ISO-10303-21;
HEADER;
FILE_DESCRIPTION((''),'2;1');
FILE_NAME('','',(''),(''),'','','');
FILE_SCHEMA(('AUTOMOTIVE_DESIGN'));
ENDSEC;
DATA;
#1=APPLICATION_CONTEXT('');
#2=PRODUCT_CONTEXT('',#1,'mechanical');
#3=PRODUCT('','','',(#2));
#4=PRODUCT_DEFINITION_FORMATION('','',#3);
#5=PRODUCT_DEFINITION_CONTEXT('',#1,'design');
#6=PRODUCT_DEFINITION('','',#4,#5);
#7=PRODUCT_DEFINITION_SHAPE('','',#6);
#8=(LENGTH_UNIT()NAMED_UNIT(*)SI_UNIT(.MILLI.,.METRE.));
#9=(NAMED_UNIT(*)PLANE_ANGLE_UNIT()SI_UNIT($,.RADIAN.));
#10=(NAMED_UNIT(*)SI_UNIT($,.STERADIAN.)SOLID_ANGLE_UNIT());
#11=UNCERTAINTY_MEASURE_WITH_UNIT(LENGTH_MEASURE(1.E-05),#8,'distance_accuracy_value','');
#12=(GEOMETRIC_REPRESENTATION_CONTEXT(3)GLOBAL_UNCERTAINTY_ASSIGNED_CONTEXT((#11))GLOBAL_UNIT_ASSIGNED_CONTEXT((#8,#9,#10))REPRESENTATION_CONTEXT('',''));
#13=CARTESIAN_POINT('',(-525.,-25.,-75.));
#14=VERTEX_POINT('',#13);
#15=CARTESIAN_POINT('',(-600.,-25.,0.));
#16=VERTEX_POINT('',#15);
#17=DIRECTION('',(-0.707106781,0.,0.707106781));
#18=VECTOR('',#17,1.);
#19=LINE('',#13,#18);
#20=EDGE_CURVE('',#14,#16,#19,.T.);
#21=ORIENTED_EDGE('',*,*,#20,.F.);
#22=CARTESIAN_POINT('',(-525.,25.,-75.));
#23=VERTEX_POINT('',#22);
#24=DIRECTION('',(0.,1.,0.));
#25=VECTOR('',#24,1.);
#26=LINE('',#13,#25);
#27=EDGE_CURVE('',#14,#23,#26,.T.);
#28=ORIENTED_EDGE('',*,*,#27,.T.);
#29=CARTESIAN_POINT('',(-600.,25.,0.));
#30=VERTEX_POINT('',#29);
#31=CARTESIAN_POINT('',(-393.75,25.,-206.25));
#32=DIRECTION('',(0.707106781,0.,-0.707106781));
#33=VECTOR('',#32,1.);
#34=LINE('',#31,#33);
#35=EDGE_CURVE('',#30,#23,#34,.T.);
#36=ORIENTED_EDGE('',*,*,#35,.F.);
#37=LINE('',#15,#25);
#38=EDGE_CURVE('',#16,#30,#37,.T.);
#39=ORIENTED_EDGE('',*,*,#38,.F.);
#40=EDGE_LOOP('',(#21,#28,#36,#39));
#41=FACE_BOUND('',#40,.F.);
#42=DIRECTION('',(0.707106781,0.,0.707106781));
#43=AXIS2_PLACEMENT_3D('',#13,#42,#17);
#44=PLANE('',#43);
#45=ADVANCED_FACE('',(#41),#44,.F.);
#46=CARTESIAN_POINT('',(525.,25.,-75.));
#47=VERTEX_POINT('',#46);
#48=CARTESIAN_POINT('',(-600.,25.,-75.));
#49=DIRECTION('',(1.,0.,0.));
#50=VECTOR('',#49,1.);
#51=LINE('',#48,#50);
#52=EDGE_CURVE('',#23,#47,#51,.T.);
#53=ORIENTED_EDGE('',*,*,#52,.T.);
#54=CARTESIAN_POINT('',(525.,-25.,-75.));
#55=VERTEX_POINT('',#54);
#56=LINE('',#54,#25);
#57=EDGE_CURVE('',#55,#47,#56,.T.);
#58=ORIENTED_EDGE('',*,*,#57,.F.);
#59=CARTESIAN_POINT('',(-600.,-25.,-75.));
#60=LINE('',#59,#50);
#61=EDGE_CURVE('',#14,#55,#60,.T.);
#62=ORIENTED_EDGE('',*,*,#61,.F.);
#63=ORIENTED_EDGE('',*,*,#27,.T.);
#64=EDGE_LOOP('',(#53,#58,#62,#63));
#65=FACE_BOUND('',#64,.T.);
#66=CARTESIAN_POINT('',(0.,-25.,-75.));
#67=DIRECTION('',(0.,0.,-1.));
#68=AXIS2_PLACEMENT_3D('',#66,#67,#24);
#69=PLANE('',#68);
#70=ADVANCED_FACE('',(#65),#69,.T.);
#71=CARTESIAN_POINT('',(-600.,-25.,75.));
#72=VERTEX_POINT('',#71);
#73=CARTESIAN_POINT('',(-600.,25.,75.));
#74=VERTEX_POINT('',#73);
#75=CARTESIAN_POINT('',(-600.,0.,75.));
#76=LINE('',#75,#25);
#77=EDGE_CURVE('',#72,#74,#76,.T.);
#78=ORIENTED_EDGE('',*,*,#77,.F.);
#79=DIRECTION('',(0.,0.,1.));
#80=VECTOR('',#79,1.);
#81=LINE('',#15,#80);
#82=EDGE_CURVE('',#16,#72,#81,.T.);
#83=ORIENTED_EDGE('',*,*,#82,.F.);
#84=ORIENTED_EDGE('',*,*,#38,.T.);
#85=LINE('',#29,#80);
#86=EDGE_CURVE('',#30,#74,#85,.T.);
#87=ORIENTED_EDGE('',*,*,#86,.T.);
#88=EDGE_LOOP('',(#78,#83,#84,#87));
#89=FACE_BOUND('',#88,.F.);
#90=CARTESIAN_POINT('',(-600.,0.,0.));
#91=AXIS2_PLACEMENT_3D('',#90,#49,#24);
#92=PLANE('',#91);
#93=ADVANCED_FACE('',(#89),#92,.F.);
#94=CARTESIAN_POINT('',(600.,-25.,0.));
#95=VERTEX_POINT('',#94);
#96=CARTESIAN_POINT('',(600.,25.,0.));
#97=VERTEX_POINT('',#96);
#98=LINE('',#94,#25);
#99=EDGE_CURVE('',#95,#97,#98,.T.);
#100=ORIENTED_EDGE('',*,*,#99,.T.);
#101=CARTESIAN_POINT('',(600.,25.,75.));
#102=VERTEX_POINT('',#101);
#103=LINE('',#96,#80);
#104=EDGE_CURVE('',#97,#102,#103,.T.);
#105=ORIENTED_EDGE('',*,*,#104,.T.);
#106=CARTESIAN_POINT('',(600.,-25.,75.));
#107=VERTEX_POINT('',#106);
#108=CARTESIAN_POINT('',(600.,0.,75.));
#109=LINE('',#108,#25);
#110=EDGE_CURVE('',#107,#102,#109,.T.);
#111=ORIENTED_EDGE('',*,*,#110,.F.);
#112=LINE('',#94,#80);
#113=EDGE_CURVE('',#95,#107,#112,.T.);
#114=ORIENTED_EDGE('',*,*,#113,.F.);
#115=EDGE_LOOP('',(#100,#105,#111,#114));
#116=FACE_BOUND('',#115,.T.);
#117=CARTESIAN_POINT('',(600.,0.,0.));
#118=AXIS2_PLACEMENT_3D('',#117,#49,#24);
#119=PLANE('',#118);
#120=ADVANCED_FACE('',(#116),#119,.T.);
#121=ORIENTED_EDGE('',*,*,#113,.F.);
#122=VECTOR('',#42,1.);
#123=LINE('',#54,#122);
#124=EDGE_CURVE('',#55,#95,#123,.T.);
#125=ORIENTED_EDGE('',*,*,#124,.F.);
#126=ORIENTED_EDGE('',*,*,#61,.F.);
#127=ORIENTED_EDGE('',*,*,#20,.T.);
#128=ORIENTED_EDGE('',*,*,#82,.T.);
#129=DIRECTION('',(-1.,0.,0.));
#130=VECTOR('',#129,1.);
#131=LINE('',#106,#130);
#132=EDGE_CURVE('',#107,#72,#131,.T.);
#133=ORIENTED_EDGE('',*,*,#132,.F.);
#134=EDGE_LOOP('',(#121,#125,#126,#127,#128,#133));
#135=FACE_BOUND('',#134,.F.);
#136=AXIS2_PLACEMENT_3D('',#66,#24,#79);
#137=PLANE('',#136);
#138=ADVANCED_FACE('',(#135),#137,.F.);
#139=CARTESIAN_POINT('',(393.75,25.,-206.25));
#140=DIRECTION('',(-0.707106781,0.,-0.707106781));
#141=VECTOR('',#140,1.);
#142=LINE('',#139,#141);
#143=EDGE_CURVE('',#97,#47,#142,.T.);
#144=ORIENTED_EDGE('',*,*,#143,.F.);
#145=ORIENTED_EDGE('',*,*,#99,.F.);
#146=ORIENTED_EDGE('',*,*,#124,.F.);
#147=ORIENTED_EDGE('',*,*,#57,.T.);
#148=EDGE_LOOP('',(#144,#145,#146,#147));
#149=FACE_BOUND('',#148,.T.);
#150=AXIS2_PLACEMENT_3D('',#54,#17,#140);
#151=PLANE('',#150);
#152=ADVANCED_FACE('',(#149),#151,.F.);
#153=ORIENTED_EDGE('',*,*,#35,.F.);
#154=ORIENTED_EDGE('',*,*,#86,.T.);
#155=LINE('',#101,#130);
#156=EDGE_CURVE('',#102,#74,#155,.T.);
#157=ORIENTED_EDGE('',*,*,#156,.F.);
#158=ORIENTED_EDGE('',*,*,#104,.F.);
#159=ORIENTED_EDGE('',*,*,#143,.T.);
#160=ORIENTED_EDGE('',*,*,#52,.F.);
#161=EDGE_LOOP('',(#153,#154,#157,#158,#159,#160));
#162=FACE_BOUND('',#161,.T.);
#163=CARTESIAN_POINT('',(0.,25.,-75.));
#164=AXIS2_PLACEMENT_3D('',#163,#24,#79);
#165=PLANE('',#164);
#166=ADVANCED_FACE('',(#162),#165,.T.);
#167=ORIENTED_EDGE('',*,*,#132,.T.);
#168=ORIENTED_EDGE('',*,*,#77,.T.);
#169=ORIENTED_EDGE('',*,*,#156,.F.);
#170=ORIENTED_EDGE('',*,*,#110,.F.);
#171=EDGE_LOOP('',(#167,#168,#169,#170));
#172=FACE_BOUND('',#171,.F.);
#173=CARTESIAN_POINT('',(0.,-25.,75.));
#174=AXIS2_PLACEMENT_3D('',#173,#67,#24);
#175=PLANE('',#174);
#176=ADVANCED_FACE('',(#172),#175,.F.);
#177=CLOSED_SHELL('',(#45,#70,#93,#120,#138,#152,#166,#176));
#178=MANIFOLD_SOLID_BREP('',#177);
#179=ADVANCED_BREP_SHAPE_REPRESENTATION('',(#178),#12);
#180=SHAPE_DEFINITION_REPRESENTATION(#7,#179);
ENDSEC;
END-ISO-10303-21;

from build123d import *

# Parameters (mm, degrees)
F0_W     = 50
F0_H     = 150
F1_DEPTH = 600
F3_DEPTH = 50.001


# Not quite as in the source:
# - a pattern or mirror of a feature is missing from the dataset's text; its kind, count and spacing are read off the source's solid


with BuildPart() as f1:
    # F0 (on Right) → F1 (new body, symmetric)
    with BuildSketch(Plane.YZ):
        Rectangle(F0_W, F0_H)
    extrude(amount=F1_DEPTH, both=True)

    # F2 (on face) → F3 (cut, through all)
    with BuildSketch(Plane.XZ.offset(25)):
        Polygon((-525, -75), (-600, 0), (-600, -75), align=None)
    f3 = extrude(amount=-F3_DEPTH, mode=Mode.SUBTRACT)

    # F3_copies: F3 across plane
    add(f3.mirror(Plane(origin=(0, 0, 0), x_dir=(0, 0, 1), z_dir=(1, 0, 0))), mode=Mode.SUBTRACT)


solid = f1.part
